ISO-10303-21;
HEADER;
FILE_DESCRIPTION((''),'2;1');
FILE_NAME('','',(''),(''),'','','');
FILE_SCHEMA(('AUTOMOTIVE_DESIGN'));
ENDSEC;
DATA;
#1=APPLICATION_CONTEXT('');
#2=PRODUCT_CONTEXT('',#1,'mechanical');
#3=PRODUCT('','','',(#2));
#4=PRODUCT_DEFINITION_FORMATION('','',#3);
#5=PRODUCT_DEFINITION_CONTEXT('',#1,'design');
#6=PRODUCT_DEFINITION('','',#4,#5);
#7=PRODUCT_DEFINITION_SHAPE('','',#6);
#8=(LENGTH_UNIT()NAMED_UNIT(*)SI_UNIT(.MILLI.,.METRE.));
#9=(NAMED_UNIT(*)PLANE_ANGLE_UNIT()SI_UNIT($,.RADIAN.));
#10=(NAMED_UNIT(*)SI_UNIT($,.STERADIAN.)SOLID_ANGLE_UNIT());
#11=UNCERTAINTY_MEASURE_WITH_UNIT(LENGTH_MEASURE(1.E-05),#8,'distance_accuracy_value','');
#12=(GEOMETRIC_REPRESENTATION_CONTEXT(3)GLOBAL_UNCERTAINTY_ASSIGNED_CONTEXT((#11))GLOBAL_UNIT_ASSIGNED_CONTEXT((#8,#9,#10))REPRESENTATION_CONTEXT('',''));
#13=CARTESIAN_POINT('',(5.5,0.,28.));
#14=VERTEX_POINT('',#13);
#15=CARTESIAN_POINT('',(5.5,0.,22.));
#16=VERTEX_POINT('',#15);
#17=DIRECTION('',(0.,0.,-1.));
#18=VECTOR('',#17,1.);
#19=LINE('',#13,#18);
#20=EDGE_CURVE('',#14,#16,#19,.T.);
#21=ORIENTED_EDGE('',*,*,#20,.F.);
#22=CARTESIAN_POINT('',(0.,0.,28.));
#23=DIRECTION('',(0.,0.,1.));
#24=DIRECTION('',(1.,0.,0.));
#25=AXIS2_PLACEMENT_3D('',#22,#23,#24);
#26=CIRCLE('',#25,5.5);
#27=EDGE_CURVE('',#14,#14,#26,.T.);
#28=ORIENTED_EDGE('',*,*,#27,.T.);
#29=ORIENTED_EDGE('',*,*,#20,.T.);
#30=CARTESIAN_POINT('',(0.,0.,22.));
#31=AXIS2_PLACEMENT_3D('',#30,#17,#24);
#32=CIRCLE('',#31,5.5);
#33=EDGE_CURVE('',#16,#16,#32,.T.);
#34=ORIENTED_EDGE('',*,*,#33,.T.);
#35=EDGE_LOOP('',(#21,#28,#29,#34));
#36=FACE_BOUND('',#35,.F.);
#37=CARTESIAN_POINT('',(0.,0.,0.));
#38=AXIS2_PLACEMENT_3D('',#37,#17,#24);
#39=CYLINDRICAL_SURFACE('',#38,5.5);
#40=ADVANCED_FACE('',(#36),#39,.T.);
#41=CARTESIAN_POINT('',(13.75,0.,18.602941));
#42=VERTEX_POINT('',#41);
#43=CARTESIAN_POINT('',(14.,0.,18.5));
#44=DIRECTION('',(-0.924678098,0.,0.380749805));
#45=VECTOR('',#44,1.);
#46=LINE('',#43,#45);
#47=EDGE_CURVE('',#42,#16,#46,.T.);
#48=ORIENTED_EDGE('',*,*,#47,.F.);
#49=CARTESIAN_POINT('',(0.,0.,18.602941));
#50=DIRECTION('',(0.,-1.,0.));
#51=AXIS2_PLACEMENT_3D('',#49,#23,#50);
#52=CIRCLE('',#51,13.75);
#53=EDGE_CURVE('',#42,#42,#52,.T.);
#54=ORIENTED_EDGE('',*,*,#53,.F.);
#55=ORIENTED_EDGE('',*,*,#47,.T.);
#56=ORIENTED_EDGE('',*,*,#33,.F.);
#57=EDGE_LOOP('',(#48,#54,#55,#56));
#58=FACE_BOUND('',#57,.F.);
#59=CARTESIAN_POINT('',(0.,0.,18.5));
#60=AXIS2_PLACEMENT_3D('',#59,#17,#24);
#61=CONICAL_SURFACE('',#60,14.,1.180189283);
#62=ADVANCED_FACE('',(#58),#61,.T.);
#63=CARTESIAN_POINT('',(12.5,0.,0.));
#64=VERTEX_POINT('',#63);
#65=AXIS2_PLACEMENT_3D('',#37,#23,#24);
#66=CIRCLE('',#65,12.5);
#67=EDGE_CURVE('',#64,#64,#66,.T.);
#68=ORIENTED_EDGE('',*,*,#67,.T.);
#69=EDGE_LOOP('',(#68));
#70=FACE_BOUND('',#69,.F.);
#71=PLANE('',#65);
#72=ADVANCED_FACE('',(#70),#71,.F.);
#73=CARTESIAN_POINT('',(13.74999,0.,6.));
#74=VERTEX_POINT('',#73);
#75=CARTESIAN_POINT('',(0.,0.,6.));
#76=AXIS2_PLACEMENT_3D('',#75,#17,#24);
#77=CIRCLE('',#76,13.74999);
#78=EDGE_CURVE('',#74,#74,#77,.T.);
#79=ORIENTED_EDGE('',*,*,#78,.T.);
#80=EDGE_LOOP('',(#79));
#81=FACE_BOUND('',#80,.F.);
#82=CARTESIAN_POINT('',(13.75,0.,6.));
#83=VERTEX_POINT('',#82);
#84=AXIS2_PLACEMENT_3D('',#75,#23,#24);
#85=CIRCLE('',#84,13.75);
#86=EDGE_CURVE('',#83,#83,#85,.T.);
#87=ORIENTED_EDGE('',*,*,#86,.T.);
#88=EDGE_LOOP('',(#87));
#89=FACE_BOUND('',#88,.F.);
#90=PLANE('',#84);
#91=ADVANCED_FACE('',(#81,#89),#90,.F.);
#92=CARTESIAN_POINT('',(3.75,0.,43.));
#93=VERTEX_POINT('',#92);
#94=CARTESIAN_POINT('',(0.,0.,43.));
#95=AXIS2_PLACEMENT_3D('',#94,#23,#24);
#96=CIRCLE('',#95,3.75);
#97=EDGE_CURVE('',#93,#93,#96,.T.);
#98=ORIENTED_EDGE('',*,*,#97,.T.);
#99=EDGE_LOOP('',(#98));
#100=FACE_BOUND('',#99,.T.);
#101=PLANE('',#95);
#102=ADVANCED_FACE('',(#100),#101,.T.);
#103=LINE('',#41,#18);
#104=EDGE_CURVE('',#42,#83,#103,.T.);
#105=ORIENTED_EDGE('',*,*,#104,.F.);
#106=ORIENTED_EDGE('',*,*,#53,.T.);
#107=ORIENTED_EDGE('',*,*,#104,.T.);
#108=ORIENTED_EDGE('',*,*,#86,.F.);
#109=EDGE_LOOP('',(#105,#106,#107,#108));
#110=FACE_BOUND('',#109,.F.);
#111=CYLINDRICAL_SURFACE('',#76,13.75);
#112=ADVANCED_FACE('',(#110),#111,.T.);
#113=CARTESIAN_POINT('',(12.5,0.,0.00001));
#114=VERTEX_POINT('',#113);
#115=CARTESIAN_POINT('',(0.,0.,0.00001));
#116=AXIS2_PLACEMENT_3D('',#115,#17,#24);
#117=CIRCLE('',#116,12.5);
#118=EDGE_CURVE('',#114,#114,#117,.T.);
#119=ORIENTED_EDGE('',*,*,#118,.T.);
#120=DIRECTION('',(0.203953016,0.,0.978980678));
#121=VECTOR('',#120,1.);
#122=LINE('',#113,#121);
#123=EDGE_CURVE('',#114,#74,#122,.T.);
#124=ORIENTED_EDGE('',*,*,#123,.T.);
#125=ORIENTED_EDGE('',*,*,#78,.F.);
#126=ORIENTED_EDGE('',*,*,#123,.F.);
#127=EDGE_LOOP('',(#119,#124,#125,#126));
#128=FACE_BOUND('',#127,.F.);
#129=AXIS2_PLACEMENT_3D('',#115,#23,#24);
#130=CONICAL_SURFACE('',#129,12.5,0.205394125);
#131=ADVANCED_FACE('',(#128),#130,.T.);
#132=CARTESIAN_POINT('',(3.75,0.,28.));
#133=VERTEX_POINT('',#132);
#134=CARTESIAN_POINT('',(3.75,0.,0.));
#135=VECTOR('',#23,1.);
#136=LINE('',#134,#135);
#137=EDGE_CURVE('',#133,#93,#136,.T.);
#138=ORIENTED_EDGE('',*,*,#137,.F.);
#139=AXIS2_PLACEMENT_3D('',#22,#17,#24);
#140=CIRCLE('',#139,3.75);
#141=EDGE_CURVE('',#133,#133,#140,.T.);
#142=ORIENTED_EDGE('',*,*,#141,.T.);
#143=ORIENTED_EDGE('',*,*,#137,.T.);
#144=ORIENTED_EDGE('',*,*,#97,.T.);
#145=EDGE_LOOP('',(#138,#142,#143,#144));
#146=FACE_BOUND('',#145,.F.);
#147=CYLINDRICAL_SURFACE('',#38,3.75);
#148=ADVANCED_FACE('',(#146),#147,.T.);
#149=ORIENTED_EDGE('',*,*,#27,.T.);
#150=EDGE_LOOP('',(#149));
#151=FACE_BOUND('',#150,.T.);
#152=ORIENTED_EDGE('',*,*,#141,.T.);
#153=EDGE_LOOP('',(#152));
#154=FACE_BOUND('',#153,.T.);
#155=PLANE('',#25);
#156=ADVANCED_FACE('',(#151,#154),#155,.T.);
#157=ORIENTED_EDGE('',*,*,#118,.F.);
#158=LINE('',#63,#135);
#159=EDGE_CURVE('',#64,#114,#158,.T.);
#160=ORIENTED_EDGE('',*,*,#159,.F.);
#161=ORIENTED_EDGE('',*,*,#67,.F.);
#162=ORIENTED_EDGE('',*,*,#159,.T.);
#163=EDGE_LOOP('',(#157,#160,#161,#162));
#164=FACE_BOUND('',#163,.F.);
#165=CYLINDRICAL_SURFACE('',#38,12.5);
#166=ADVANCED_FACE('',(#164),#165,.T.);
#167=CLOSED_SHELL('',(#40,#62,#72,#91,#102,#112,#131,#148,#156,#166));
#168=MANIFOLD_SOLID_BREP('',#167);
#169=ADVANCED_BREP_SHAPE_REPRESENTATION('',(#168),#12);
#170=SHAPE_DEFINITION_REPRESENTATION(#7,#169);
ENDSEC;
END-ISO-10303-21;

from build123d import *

# Parameters (mm, degrees)
F1_START    = 6
F0_R        = 13.75
F0_R_2      = 12.5
F0_R_3      = 5.5
F0_R_4      = 3.75
F1_DEPTH    = 12.5
F2_DEPTH    = 22
F3_DEPTH    = 28
F4_DEPTH    = 7
F5_SIZE2    = 1.24999
F5_SIZE     = 5.99999
F6_S5_R     = 13.75
F6_T6_DEPTH = 21
F7_DEPTH    = 43


# Not quite as in the source:
# - a fillet or chamfer that OpenCascade refuses, or shapes differently, is made with other operations: its cross-section is extruded or revolved along the edge and cut away or added
# - a fillet or chamfer is up to 0.001 mm smaller than in the source, because OpenCascade refuses the exact size


with BuildPart() as f1:
    # F0 (on Top) → F1 (new body)
    with BuildSketch(Plane.XY.offset(F1_START)):
        Circle(F0_R)
        Circle(F0_R_2, mode=Mode.SUBTRACT)
        Circle(F0_R_2)
        Circle(F0_R_3, mode=Mode.SUBTRACT)
        Circle(F0_R_3)
        Circle(F0_R_4, mode=Mode.SUBTRACT)
        Circle(F0_R_4)
    extrude(amount=F1_DEPTH)

    # F0 (on Top) → F2 (join)
    with BuildSketch(Plane.XY):
        Circle(F0_R_3)
        Circle(F0_R_4, mode=Mode.SUBTRACT)
        Circle(F0_R_4)
    extrude(amount=F2_DEPTH)

    # F0 (on Top) → F3 (join)
    with BuildSketch(Plane.XY):
        Circle(F0_R_3)
        Circle(F0_R_4, mode=Mode.SUBTRACT)
        Circle(F0_R_4)
    extrude(amount=F3_DEPTH)

    # F0 (on Top) → F4 (join)
    with BuildSketch(Plane.XY):
        Circle(F0_R_2)
        Circle(F0_R_3, mode=Mode.SUBTRACT)
    extrude(amount=F4_DEPTH)

    # F5 (size 6 and 1.25 in the source; OpenCascade refuses exactly that, so slightly less here)
    f5_edges = [f1.edges().sort_by_distance(p)[0] for p in [
        (-12.5, 0, 6),
    ]]
    f5_side = f1.faces().sort_by_distance((-12.5, 0, 3))[0]
    chamfer(f5_edges, length=F5_SIZE, length2=F5_SIZE2, reference=f5_side)

    # F6: chamfer of 8.5 x 3.5 on 1 edges, made by hand


with BuildPart() as f6_tool2:
    # F6_s3 → F6_t4 (revolve)
    with BuildSketch(Plane.XZ):
        Polygon((14, 18.5), (5.5, 22), (5.5, 18.5), align=None)
    revolve(axis=Axis((0, 0, 18.5), (0, 0, -1)))

    # F6_s5 → F6_t6 (intersect, symmetric)
    with BuildSketch(Plane.XY.offset(20.2)):
        Circle(F6_S5_R)
    extrude(amount=F6_T6_DEPTH, both=True, mode=Mode.INTERSECT)


with BuildPart() as f1_1:
    add(f1.part)

    # F6_t1: union F6_tool2
    add(f6_tool2.part)

    # F0 (on Top) → F7 (join)
    with BuildSketch(Plane.XY):
        Circle(F0_R_4)
    extrude(amount=F7_DEPTH)


solid = f1_1.part
